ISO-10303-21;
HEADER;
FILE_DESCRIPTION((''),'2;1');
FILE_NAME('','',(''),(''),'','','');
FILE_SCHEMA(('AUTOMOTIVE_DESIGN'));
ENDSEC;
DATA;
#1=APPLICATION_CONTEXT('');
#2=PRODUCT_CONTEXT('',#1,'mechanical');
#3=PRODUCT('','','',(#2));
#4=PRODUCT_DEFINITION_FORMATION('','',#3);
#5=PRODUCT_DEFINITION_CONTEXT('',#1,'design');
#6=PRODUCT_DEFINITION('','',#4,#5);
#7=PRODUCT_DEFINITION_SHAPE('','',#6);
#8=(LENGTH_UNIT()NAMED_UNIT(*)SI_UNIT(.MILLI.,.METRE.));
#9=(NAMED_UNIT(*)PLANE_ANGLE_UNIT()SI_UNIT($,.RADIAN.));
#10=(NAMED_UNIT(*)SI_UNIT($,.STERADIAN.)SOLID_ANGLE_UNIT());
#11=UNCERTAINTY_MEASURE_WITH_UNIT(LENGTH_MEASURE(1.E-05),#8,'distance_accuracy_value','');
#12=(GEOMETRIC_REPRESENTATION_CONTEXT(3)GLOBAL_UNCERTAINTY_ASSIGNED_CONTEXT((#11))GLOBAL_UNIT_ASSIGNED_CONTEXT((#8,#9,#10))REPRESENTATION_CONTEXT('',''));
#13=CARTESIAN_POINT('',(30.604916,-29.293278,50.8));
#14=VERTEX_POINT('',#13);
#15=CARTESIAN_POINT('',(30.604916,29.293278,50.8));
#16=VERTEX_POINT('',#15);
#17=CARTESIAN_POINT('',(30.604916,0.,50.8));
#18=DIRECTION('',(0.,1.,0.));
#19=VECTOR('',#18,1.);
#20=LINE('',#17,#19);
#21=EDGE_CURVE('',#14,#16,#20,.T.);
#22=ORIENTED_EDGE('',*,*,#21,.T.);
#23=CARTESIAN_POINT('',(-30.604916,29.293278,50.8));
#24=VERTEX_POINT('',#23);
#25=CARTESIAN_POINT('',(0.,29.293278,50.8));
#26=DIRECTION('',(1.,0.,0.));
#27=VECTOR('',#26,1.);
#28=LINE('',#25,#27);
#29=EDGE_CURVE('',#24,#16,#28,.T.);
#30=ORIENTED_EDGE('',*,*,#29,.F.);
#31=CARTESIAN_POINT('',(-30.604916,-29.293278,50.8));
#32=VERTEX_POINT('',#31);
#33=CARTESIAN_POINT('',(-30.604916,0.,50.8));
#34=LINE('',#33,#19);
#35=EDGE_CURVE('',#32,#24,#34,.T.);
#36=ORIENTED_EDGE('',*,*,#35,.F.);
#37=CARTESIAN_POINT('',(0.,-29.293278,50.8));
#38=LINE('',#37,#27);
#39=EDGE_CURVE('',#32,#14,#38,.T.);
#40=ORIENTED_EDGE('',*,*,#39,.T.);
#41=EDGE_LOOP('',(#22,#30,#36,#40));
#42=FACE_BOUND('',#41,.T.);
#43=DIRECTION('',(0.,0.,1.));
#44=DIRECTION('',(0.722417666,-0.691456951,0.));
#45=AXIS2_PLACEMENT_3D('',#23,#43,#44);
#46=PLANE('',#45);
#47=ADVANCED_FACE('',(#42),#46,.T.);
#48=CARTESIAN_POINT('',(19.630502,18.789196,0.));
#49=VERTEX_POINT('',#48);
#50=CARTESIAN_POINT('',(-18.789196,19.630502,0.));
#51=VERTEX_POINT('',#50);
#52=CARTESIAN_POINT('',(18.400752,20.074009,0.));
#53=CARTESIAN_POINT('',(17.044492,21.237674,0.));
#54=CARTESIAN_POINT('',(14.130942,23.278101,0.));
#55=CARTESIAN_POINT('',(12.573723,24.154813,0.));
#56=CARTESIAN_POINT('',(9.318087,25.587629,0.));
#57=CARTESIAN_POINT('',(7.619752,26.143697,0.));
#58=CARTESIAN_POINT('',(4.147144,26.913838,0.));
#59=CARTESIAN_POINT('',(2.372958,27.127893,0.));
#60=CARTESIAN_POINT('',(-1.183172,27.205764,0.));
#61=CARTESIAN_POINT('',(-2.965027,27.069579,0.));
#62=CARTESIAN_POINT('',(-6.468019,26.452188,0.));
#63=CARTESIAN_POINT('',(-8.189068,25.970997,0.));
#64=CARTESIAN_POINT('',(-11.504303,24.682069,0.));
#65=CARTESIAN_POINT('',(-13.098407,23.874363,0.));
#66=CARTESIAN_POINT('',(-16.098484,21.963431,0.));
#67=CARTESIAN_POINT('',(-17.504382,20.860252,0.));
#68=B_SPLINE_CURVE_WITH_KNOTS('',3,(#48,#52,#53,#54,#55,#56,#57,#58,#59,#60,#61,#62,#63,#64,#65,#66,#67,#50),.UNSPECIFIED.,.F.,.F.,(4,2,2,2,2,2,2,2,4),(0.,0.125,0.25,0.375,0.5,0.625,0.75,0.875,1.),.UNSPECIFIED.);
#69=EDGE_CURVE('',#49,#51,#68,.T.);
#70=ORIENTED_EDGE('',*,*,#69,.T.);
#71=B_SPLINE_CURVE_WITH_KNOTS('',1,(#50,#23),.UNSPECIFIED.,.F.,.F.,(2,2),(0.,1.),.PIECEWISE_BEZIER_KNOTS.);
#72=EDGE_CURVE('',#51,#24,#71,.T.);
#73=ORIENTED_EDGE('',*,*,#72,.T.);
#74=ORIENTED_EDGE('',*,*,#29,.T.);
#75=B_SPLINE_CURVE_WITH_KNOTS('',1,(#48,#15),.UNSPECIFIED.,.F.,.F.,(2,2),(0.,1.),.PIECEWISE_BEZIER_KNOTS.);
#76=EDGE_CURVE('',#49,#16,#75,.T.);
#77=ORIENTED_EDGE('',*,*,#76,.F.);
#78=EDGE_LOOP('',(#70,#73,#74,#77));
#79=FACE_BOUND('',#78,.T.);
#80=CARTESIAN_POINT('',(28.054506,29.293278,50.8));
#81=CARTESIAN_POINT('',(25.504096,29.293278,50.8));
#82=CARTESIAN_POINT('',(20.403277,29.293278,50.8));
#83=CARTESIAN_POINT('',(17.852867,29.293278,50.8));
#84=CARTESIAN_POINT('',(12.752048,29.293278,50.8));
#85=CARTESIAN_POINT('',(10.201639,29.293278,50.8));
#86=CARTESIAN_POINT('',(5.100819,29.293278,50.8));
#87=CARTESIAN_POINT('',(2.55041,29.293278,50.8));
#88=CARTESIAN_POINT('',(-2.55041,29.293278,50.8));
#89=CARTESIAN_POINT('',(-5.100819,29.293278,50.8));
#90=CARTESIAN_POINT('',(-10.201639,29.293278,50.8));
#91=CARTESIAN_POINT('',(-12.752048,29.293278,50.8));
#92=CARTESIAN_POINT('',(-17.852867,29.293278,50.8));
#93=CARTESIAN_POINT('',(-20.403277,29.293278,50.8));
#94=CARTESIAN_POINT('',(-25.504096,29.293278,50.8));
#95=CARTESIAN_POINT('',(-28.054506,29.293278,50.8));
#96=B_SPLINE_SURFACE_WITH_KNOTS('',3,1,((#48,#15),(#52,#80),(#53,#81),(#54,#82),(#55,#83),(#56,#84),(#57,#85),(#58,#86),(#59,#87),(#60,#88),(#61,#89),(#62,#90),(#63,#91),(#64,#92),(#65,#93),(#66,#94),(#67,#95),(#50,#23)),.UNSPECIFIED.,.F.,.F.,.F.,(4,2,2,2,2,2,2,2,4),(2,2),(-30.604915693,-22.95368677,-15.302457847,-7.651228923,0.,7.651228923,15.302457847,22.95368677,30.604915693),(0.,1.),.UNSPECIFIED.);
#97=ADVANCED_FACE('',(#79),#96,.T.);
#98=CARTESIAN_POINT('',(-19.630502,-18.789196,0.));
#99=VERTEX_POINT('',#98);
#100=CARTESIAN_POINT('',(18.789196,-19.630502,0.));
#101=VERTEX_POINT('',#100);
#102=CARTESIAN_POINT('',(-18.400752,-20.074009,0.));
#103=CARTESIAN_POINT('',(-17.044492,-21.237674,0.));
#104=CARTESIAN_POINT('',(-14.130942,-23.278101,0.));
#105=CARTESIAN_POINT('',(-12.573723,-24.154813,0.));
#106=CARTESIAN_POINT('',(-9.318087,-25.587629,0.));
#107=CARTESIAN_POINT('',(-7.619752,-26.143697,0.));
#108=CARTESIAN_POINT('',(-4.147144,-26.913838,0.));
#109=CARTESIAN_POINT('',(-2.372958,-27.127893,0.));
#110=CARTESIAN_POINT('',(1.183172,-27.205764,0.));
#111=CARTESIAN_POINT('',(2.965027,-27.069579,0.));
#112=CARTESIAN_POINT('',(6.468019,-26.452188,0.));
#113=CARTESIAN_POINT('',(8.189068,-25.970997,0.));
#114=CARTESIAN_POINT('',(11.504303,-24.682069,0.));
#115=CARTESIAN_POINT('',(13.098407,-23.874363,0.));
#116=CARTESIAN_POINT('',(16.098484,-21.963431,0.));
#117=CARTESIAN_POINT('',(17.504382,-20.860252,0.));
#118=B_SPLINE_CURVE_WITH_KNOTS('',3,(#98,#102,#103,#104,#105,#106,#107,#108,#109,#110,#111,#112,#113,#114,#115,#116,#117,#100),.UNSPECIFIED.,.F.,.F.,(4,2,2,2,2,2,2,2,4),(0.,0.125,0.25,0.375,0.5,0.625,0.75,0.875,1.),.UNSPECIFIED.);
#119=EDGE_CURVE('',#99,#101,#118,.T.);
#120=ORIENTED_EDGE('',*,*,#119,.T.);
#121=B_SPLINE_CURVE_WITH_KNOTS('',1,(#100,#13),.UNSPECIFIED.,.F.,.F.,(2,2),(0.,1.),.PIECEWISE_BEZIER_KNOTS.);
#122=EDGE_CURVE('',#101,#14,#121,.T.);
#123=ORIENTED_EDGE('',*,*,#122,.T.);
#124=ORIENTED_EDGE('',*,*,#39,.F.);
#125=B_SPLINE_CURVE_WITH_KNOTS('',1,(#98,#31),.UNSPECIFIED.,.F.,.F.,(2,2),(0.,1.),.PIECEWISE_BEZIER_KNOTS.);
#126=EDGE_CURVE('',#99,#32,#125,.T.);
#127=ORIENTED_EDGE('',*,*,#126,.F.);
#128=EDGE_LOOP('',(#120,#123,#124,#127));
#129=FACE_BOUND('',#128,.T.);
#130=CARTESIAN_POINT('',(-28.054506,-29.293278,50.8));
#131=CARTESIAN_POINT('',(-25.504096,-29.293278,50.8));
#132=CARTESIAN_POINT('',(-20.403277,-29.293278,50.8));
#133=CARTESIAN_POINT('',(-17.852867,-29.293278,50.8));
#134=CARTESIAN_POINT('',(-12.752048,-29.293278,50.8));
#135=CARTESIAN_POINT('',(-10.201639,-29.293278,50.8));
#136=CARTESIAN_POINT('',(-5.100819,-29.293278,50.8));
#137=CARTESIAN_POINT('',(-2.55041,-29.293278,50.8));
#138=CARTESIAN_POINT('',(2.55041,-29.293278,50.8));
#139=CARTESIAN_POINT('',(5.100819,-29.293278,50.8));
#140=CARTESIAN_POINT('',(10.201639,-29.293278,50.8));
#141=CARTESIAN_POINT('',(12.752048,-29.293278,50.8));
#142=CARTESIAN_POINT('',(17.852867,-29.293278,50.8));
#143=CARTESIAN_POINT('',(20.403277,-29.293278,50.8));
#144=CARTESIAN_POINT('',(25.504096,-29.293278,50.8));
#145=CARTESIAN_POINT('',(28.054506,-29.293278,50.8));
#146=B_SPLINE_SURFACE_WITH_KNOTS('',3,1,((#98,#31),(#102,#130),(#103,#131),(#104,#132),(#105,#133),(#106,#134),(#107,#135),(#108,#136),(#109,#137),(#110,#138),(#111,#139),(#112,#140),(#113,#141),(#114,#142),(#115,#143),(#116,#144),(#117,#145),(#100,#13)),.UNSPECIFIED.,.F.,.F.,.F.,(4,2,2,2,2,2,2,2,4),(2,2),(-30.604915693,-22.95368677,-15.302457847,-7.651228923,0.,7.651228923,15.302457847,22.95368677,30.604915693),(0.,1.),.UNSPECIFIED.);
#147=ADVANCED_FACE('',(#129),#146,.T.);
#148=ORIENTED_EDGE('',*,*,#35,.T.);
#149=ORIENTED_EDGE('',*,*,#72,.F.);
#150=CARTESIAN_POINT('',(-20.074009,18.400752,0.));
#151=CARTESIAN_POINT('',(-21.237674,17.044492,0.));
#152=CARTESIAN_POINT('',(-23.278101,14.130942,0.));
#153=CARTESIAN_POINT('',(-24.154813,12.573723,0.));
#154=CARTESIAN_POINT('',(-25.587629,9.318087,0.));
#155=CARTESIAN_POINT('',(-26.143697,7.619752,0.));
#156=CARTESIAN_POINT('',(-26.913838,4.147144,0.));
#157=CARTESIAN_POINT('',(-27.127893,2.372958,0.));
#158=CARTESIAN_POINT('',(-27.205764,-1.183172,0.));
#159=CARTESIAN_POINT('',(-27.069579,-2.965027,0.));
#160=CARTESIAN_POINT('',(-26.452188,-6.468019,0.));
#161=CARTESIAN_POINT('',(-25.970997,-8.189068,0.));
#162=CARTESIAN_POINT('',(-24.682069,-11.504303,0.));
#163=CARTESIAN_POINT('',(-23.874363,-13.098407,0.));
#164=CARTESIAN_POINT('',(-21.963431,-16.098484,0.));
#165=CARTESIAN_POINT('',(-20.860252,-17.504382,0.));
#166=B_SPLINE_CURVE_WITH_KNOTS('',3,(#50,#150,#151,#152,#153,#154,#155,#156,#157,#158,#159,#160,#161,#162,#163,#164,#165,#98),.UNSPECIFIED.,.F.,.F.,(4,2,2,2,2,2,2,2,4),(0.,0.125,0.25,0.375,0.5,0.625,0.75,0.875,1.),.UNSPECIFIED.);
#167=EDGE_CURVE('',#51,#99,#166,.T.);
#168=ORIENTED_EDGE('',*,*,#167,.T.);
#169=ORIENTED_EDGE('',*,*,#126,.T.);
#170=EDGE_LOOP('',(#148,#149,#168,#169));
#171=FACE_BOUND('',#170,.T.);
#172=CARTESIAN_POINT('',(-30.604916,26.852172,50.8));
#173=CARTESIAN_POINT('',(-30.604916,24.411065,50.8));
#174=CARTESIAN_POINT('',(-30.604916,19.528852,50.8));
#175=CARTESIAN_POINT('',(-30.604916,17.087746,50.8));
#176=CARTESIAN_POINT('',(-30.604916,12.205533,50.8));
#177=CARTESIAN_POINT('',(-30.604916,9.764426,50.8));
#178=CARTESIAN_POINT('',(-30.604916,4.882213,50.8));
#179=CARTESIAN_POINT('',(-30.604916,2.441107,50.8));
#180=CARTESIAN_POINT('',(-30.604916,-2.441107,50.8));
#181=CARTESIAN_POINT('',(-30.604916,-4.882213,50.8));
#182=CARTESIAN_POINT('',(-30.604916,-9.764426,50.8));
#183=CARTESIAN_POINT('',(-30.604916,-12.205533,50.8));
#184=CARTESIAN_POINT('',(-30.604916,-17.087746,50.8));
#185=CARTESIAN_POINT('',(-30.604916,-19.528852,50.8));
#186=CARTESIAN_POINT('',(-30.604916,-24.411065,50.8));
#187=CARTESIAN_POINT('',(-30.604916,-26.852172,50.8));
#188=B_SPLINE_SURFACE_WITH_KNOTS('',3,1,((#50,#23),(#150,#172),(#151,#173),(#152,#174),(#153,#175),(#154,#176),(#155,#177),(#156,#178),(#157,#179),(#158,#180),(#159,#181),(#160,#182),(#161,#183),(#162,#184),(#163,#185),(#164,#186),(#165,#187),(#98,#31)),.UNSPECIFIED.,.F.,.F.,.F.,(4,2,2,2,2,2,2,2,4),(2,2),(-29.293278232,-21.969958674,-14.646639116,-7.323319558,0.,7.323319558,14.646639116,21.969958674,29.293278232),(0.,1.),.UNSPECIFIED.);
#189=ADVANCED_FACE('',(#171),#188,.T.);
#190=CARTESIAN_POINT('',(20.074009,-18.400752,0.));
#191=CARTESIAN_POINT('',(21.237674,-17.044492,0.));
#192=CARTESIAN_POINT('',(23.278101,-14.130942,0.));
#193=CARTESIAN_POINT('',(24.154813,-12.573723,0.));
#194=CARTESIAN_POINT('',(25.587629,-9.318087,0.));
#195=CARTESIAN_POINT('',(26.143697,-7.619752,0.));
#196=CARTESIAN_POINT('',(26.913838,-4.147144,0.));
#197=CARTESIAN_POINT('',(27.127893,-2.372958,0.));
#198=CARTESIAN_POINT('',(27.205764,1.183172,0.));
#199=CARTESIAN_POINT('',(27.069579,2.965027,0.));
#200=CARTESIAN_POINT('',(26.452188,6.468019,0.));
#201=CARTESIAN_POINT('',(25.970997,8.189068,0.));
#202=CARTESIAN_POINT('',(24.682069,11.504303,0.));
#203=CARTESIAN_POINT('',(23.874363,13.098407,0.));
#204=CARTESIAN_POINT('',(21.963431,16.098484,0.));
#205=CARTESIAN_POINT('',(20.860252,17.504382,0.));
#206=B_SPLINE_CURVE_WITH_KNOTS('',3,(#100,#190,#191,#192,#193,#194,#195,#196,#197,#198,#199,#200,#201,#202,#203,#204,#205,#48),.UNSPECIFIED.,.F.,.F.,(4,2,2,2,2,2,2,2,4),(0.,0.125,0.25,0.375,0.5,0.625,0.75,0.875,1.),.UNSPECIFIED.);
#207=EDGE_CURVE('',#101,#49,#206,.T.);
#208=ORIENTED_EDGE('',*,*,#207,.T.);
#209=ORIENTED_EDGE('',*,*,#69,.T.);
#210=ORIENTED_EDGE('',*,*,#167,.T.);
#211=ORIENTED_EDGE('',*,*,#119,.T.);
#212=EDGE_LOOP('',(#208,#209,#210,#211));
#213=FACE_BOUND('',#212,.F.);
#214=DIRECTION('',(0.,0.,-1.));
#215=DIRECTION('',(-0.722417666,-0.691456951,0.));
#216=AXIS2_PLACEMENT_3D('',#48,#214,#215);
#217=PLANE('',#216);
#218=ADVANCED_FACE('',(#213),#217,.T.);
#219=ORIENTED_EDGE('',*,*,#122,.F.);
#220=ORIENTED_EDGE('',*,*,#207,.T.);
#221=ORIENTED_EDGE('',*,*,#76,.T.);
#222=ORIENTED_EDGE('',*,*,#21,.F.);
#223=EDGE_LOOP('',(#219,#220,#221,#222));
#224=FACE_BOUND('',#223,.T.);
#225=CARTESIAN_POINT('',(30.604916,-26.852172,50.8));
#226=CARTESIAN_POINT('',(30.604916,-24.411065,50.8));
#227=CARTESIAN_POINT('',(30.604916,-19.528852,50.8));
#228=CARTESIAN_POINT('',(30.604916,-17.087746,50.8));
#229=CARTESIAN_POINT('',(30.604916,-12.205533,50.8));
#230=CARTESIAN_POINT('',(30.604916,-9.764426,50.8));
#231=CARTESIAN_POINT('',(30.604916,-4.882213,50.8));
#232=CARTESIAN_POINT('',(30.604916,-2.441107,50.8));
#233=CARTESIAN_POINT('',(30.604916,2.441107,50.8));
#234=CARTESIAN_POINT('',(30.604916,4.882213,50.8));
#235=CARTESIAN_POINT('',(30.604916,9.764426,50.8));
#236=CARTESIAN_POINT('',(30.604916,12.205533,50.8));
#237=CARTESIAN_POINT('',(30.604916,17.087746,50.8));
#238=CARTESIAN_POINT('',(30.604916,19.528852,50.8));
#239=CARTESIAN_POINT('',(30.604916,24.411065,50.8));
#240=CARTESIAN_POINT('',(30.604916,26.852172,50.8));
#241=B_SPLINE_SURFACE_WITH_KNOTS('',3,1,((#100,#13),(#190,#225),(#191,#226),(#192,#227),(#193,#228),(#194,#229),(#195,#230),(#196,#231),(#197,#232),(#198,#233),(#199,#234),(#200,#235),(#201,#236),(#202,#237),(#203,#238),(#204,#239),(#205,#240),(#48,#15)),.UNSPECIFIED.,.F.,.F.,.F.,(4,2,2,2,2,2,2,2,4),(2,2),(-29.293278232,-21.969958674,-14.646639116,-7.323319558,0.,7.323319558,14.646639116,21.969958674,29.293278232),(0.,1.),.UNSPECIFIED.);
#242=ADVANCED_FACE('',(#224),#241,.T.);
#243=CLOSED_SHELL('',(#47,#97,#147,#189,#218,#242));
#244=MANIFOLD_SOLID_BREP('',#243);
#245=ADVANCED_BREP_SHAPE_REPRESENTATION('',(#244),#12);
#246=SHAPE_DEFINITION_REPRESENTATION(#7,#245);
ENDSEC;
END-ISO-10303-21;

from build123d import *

# Parameters (mm, degrees)
F2_W = 61.2098313868
F2_H = 58.5865564644


# Not quite as in the source:
# - the arcs of a loft's sections are written as splines that run evenly, so that the points pair up as in the source's solid


with BuildPart() as f3:
    # F0 (on Top) → F3 section 0
    with BuildSketch(Plane.XY):
        with BuildLine():
            add(Edge.make_bspline(
                [(19.6305017595, 18.7891956848), (18.4007517777, 20.0740090205), (17.0444922643, 21.2376737801), (14.1309416079, 23.2781011556), (12.5737225081, 24.154813318), (9.3180872769, 25.5876289179), (7.6197516474, 26.1436969262), (4.1471440775, 26.9138384505), (2.3729580041, 27.1278929231), (-1.1831715431, 27.2057642649), (-2.9650270846, 27.0695792085), (-6.4680185448, 26.4521878158), (-8.1890678452, 25.9709967457), (-11.5043032211, 24.6820686235), (-13.098407321, 23.8743634427), (-16.0984839763, 21.9634313758), (-17.5043823491, 20.8602517414), (-18.7891956848, 19.6305017595)],
                knots=[0, 0, 0, 0, 0.125, 0.125, 0.25, 0.25, 0.375, 0.375, 0.5, 0.5, 0.625, 0.625, 0.75, 0.75, 0.875, 0.875, 1, 1, 1, 1], degree=3))
            add(Edge.make_bspline(
                [(-18.7891956848, 19.6305017595), (-20.0740090205, 18.4007517777), (-21.2376737801, 17.0444922643), (-23.2781011556, 14.1309416079), (-24.154813318, 12.5737225081), (-25.5876289179, 9.3180872769), (-26.1436969262, 7.6197516474), (-26.9138384505, 4.1471440775), (-27.1278929231, 2.3729580041), (-27.2057642649, -1.1831715431), (-27.0695792085, -2.9650270846), (-26.4521878158, -6.4680185448), (-25.9709967457, -8.1890678452), (-24.6820686235, -11.5043032211), (-23.8743634427, -13.098407321), (-21.9634313758, -16.0984839763), (-20.8602517414, -17.5043823491), (-19.6305017595, -18.7891956848)],
                knots=[0, 0, 0, 0, 0.125, 0.125, 0.25, 0.25, 0.375, 0.375, 0.5, 0.5, 0.625, 0.625, 0.75, 0.75, 0.875, 0.875, 1, 1, 1, 1], degree=3))
            add(Edge.make_bspline(
                [(-19.6305017595, -18.7891956848), (-18.4007517777, -20.0740090205), (-17.0444922643, -21.2376737801), (-14.1309416079, -23.2781011556), (-12.5737225081, -24.154813318), (-9.3180872769, -25.5876289179), (-7.6197516474, -26.1436969262), (-4.1471440775, -26.9138384505), (-2.3729580041, -27.1278929231), (1.1831715431, -27.2057642649), (2.9650270846, -27.0695792085), (6.4680185448, -26.4521878158), (8.1890678452, -25.9709967457), (11.5043032211, -24.6820686235), (13.098407321, -23.8743634427), (16.0984839763, -21.9634313758), (17.5043823491, -20.8602517414), (18.7891956848, -19.6305017595)],
                knots=[0, 0, 0, 0, 0.125, 0.125, 0.25, 0.25, 0.375, 0.375, 0.5, 0.5, 0.625, 0.625, 0.75, 0.75, 0.875, 0.875, 1, 1, 1, 1], degree=3))
            add(Edge.make_bspline(
                [(18.7891956848, -19.6305017595), (20.0740090205, -18.4007517777), (21.2376737801, -17.0444922643), (23.2781011556, -14.1309416079), (24.154813318, -12.5737225081), (25.5876289179, -9.3180872769), (26.1436969262, -7.6197516474), (26.9138384505, -4.1471440775), (27.1278929231, -2.3729580041), (27.2057642649, 1.1831715431), (27.0695792085, 2.9650270846), (26.4521878158, 6.4680185448), (25.9709967457, 8.1890678452), (24.6820686235, 11.5043032211), (23.8743634427, 13.098407321), (21.9634313758, 16.0984839763), (20.8602517414, 17.5043823491), (19.6305017595, 18.7891956848)],
                knots=[0, 0, 0, 0, 0.125, 0.125, 0.25, 0.25, 0.375, 0.375, 0.5, 0.5, 0.625, 0.625, 0.75, 0.75, 0.875, 0.875, 1, 1, 1, 1], degree=3))
        make_face()
    # F2 (on offset) → F3 section 1
    with BuildSketch(Plane.XY.offset(50.8)):
        Rectangle(F2_W, F2_H)
    loft(ruled=True)


solid = f3.part
